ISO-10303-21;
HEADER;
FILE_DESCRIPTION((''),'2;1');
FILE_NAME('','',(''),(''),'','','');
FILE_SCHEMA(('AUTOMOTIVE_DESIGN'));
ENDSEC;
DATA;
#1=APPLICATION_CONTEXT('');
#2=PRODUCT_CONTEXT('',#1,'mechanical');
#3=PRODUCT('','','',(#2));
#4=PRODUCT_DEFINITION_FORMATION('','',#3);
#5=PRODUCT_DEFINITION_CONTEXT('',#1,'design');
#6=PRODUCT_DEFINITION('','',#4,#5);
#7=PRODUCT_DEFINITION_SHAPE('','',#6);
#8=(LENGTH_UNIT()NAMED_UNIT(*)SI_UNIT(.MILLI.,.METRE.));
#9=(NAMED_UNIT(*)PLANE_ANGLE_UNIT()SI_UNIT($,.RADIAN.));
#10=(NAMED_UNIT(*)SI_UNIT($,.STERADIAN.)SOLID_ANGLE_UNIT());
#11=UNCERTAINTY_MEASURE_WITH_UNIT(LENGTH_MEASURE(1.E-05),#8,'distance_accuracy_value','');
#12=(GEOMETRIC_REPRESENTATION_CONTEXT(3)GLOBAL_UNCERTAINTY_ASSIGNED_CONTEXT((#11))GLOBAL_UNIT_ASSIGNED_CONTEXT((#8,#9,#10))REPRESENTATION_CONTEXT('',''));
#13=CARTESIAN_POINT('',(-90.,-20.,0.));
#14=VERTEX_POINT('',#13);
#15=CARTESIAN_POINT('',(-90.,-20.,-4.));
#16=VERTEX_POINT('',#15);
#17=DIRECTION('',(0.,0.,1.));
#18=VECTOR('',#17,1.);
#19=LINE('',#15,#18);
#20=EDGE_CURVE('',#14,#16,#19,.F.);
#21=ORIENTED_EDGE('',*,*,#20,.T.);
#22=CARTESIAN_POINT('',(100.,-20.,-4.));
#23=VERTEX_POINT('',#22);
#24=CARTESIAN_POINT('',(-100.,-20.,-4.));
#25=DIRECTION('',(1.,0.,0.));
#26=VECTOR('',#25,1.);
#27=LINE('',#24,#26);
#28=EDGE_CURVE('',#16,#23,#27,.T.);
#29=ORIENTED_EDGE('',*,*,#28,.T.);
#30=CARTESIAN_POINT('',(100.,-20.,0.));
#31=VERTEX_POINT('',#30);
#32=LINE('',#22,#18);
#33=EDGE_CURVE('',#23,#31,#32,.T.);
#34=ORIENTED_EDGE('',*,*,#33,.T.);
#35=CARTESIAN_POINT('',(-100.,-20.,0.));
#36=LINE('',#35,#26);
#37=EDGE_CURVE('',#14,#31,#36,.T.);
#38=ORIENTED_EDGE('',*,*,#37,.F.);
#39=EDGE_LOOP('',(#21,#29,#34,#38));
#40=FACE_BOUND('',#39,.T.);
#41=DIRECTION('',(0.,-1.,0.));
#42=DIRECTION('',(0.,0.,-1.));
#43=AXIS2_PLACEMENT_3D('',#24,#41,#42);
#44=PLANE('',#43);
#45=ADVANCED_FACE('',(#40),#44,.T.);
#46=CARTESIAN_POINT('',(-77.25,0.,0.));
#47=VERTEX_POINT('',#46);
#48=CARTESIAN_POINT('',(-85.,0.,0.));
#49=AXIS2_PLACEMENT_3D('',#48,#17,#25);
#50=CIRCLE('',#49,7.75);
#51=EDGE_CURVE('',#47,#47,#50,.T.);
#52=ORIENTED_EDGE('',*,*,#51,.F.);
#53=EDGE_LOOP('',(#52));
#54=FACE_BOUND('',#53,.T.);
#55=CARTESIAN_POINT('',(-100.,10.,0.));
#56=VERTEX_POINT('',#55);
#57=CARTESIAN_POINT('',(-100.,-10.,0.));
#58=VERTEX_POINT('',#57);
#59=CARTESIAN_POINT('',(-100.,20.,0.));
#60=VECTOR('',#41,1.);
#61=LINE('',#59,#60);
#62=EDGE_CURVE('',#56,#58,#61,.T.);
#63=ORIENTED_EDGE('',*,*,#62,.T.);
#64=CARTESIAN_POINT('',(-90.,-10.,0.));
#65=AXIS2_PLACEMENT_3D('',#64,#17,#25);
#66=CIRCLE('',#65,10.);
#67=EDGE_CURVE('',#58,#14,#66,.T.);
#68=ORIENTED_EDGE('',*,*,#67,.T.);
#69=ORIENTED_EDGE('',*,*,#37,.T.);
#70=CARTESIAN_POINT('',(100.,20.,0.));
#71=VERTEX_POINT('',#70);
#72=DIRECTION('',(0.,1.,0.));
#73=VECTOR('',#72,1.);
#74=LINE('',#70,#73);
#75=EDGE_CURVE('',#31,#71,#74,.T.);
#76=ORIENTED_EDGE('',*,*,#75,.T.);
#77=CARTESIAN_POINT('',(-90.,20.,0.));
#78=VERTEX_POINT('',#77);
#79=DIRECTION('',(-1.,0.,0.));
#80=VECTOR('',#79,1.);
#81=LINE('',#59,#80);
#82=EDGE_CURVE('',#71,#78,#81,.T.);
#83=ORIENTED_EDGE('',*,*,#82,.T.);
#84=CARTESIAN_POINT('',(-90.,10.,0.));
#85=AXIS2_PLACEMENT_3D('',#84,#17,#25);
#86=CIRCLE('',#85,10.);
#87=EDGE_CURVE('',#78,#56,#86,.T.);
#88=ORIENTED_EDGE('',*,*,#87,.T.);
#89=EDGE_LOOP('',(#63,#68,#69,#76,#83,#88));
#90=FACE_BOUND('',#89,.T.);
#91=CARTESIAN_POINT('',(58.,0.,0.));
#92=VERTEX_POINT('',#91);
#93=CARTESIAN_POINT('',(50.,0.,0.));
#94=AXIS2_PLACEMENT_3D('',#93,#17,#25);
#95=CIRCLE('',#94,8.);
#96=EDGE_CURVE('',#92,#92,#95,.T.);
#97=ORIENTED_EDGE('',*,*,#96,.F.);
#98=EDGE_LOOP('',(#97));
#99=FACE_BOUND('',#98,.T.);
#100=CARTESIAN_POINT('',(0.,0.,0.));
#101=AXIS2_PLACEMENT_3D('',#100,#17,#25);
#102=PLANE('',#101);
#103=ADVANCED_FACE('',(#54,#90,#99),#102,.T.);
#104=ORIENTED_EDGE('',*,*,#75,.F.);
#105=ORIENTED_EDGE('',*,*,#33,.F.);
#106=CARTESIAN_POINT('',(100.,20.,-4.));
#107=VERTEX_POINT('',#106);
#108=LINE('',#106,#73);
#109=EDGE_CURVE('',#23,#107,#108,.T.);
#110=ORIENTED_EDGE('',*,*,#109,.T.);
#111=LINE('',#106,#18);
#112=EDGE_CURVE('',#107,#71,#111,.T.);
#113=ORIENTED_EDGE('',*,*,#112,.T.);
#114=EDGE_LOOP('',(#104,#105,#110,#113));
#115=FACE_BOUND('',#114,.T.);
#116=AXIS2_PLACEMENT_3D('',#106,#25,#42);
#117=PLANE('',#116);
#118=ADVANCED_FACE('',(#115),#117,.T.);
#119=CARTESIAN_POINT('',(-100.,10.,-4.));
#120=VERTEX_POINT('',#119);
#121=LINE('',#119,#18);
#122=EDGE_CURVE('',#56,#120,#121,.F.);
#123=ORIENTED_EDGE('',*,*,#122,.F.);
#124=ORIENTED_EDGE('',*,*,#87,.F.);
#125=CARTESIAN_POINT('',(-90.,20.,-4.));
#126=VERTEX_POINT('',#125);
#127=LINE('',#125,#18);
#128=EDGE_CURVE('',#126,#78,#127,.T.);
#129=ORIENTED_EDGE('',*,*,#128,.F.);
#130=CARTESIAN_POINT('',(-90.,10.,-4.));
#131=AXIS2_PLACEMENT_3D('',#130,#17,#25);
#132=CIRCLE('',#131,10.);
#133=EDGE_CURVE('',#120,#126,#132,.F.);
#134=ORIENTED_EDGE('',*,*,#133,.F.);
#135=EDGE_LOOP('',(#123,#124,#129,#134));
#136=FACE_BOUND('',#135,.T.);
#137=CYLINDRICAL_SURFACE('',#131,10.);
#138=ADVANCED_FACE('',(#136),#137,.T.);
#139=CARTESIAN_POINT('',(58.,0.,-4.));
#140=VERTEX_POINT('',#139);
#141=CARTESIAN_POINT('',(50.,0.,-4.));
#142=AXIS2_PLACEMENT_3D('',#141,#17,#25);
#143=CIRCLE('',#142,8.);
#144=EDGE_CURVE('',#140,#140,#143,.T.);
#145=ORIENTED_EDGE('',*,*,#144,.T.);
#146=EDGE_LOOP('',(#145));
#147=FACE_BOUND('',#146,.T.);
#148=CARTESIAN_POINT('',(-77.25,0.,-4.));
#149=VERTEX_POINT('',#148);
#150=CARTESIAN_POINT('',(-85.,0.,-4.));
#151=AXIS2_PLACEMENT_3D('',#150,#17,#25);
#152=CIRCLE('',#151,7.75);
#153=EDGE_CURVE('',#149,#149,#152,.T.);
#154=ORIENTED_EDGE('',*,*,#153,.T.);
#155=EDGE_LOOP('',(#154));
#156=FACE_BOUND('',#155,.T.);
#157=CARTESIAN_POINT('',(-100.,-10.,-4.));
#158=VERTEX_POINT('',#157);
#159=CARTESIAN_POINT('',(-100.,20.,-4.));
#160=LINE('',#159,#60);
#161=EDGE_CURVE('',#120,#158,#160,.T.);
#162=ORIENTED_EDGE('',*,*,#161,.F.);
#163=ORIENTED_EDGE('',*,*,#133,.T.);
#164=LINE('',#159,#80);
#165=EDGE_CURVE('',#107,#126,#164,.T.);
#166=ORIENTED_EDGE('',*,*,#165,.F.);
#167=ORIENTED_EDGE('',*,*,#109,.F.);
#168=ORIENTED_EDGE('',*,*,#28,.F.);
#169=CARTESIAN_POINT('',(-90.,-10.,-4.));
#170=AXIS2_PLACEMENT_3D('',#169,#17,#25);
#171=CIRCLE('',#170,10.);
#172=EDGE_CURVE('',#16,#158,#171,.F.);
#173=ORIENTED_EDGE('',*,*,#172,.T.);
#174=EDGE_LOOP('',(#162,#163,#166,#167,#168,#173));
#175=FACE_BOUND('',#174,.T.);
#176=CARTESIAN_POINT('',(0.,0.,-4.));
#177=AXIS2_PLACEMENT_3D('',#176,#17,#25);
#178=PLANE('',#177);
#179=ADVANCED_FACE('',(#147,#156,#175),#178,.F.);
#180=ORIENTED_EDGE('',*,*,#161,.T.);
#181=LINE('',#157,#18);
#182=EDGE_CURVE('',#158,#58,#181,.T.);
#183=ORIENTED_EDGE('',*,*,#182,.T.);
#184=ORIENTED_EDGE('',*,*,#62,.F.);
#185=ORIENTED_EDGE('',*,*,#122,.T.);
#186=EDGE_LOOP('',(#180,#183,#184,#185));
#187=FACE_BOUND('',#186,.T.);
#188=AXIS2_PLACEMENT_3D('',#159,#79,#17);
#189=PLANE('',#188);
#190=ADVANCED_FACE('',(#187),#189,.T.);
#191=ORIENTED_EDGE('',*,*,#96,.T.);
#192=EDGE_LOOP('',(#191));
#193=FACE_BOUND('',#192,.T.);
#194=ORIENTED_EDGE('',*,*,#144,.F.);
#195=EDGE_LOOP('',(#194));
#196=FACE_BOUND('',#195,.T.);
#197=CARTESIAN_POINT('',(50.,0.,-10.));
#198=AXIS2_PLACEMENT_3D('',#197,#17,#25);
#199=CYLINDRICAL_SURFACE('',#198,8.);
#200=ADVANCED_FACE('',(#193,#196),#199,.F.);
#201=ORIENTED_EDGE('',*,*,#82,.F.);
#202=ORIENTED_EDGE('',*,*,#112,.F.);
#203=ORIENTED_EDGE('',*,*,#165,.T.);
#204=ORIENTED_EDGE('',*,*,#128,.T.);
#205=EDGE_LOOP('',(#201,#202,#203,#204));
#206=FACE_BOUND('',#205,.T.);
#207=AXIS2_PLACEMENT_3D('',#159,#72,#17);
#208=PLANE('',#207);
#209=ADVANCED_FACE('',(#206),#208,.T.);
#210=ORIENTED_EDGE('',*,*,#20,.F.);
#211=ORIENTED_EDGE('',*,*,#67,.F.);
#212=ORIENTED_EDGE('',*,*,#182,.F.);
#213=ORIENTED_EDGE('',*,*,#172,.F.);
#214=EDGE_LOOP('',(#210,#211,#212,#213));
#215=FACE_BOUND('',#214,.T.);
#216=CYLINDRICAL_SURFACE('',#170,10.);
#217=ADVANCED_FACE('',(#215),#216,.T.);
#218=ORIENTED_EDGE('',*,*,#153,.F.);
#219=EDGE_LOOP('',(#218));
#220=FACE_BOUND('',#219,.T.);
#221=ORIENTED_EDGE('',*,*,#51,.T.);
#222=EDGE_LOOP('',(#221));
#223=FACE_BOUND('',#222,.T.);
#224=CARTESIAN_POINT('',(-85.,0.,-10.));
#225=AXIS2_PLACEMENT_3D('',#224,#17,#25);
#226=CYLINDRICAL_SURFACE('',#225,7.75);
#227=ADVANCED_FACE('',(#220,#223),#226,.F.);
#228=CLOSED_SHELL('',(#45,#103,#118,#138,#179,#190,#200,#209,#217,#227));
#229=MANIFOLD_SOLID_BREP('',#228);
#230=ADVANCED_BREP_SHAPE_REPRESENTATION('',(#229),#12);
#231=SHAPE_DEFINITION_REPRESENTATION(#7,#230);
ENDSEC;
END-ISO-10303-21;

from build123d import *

# Parameters (mm, degrees)
IZIM1_W               = 200
IZIM1_H               = 40
TABAN_FLAN_1_DEPTH    = 4
IZIM6_R               = 7.75
IZIM6_R_2             = 8
KES_EKSTR_ZYON1_DEPTH = 10
RADYUS1_R             = 10


# Sheet-metal steps are written as plain solids
with BuildPart() as part:
    # Çizim1 → Taban-Flanş1 (new body)
    with BuildSketch(Plane.XY):
        Rectangle(IZIM1_W, IZIM1_H)
    extrude(amount=-TABAN_FLAN_1_DEPTH)

    # Çizim6 → Kes-Ekstrüzyon1 (cut)
    with BuildSketch(Plane.XY):
        with Locations((-85, 0)):
            Circle(IZIM6_R)
        with Locations((50, 0)):
            Circle(IZIM6_R_2)
    extrude(amount=-KES_EKSTR_ZYON1_DEPTH, mode=Mode.SUBTRACT)

    # Radyus1
    radyus1_edges = [part.edges().sort_by_distance(p)[0] for p in [
        (-100, -20, -2),
        (-100, 20, -2),
    ]]
    fillet(radyus1_edges, radius=RADYUS1_R)


solid = part.part
